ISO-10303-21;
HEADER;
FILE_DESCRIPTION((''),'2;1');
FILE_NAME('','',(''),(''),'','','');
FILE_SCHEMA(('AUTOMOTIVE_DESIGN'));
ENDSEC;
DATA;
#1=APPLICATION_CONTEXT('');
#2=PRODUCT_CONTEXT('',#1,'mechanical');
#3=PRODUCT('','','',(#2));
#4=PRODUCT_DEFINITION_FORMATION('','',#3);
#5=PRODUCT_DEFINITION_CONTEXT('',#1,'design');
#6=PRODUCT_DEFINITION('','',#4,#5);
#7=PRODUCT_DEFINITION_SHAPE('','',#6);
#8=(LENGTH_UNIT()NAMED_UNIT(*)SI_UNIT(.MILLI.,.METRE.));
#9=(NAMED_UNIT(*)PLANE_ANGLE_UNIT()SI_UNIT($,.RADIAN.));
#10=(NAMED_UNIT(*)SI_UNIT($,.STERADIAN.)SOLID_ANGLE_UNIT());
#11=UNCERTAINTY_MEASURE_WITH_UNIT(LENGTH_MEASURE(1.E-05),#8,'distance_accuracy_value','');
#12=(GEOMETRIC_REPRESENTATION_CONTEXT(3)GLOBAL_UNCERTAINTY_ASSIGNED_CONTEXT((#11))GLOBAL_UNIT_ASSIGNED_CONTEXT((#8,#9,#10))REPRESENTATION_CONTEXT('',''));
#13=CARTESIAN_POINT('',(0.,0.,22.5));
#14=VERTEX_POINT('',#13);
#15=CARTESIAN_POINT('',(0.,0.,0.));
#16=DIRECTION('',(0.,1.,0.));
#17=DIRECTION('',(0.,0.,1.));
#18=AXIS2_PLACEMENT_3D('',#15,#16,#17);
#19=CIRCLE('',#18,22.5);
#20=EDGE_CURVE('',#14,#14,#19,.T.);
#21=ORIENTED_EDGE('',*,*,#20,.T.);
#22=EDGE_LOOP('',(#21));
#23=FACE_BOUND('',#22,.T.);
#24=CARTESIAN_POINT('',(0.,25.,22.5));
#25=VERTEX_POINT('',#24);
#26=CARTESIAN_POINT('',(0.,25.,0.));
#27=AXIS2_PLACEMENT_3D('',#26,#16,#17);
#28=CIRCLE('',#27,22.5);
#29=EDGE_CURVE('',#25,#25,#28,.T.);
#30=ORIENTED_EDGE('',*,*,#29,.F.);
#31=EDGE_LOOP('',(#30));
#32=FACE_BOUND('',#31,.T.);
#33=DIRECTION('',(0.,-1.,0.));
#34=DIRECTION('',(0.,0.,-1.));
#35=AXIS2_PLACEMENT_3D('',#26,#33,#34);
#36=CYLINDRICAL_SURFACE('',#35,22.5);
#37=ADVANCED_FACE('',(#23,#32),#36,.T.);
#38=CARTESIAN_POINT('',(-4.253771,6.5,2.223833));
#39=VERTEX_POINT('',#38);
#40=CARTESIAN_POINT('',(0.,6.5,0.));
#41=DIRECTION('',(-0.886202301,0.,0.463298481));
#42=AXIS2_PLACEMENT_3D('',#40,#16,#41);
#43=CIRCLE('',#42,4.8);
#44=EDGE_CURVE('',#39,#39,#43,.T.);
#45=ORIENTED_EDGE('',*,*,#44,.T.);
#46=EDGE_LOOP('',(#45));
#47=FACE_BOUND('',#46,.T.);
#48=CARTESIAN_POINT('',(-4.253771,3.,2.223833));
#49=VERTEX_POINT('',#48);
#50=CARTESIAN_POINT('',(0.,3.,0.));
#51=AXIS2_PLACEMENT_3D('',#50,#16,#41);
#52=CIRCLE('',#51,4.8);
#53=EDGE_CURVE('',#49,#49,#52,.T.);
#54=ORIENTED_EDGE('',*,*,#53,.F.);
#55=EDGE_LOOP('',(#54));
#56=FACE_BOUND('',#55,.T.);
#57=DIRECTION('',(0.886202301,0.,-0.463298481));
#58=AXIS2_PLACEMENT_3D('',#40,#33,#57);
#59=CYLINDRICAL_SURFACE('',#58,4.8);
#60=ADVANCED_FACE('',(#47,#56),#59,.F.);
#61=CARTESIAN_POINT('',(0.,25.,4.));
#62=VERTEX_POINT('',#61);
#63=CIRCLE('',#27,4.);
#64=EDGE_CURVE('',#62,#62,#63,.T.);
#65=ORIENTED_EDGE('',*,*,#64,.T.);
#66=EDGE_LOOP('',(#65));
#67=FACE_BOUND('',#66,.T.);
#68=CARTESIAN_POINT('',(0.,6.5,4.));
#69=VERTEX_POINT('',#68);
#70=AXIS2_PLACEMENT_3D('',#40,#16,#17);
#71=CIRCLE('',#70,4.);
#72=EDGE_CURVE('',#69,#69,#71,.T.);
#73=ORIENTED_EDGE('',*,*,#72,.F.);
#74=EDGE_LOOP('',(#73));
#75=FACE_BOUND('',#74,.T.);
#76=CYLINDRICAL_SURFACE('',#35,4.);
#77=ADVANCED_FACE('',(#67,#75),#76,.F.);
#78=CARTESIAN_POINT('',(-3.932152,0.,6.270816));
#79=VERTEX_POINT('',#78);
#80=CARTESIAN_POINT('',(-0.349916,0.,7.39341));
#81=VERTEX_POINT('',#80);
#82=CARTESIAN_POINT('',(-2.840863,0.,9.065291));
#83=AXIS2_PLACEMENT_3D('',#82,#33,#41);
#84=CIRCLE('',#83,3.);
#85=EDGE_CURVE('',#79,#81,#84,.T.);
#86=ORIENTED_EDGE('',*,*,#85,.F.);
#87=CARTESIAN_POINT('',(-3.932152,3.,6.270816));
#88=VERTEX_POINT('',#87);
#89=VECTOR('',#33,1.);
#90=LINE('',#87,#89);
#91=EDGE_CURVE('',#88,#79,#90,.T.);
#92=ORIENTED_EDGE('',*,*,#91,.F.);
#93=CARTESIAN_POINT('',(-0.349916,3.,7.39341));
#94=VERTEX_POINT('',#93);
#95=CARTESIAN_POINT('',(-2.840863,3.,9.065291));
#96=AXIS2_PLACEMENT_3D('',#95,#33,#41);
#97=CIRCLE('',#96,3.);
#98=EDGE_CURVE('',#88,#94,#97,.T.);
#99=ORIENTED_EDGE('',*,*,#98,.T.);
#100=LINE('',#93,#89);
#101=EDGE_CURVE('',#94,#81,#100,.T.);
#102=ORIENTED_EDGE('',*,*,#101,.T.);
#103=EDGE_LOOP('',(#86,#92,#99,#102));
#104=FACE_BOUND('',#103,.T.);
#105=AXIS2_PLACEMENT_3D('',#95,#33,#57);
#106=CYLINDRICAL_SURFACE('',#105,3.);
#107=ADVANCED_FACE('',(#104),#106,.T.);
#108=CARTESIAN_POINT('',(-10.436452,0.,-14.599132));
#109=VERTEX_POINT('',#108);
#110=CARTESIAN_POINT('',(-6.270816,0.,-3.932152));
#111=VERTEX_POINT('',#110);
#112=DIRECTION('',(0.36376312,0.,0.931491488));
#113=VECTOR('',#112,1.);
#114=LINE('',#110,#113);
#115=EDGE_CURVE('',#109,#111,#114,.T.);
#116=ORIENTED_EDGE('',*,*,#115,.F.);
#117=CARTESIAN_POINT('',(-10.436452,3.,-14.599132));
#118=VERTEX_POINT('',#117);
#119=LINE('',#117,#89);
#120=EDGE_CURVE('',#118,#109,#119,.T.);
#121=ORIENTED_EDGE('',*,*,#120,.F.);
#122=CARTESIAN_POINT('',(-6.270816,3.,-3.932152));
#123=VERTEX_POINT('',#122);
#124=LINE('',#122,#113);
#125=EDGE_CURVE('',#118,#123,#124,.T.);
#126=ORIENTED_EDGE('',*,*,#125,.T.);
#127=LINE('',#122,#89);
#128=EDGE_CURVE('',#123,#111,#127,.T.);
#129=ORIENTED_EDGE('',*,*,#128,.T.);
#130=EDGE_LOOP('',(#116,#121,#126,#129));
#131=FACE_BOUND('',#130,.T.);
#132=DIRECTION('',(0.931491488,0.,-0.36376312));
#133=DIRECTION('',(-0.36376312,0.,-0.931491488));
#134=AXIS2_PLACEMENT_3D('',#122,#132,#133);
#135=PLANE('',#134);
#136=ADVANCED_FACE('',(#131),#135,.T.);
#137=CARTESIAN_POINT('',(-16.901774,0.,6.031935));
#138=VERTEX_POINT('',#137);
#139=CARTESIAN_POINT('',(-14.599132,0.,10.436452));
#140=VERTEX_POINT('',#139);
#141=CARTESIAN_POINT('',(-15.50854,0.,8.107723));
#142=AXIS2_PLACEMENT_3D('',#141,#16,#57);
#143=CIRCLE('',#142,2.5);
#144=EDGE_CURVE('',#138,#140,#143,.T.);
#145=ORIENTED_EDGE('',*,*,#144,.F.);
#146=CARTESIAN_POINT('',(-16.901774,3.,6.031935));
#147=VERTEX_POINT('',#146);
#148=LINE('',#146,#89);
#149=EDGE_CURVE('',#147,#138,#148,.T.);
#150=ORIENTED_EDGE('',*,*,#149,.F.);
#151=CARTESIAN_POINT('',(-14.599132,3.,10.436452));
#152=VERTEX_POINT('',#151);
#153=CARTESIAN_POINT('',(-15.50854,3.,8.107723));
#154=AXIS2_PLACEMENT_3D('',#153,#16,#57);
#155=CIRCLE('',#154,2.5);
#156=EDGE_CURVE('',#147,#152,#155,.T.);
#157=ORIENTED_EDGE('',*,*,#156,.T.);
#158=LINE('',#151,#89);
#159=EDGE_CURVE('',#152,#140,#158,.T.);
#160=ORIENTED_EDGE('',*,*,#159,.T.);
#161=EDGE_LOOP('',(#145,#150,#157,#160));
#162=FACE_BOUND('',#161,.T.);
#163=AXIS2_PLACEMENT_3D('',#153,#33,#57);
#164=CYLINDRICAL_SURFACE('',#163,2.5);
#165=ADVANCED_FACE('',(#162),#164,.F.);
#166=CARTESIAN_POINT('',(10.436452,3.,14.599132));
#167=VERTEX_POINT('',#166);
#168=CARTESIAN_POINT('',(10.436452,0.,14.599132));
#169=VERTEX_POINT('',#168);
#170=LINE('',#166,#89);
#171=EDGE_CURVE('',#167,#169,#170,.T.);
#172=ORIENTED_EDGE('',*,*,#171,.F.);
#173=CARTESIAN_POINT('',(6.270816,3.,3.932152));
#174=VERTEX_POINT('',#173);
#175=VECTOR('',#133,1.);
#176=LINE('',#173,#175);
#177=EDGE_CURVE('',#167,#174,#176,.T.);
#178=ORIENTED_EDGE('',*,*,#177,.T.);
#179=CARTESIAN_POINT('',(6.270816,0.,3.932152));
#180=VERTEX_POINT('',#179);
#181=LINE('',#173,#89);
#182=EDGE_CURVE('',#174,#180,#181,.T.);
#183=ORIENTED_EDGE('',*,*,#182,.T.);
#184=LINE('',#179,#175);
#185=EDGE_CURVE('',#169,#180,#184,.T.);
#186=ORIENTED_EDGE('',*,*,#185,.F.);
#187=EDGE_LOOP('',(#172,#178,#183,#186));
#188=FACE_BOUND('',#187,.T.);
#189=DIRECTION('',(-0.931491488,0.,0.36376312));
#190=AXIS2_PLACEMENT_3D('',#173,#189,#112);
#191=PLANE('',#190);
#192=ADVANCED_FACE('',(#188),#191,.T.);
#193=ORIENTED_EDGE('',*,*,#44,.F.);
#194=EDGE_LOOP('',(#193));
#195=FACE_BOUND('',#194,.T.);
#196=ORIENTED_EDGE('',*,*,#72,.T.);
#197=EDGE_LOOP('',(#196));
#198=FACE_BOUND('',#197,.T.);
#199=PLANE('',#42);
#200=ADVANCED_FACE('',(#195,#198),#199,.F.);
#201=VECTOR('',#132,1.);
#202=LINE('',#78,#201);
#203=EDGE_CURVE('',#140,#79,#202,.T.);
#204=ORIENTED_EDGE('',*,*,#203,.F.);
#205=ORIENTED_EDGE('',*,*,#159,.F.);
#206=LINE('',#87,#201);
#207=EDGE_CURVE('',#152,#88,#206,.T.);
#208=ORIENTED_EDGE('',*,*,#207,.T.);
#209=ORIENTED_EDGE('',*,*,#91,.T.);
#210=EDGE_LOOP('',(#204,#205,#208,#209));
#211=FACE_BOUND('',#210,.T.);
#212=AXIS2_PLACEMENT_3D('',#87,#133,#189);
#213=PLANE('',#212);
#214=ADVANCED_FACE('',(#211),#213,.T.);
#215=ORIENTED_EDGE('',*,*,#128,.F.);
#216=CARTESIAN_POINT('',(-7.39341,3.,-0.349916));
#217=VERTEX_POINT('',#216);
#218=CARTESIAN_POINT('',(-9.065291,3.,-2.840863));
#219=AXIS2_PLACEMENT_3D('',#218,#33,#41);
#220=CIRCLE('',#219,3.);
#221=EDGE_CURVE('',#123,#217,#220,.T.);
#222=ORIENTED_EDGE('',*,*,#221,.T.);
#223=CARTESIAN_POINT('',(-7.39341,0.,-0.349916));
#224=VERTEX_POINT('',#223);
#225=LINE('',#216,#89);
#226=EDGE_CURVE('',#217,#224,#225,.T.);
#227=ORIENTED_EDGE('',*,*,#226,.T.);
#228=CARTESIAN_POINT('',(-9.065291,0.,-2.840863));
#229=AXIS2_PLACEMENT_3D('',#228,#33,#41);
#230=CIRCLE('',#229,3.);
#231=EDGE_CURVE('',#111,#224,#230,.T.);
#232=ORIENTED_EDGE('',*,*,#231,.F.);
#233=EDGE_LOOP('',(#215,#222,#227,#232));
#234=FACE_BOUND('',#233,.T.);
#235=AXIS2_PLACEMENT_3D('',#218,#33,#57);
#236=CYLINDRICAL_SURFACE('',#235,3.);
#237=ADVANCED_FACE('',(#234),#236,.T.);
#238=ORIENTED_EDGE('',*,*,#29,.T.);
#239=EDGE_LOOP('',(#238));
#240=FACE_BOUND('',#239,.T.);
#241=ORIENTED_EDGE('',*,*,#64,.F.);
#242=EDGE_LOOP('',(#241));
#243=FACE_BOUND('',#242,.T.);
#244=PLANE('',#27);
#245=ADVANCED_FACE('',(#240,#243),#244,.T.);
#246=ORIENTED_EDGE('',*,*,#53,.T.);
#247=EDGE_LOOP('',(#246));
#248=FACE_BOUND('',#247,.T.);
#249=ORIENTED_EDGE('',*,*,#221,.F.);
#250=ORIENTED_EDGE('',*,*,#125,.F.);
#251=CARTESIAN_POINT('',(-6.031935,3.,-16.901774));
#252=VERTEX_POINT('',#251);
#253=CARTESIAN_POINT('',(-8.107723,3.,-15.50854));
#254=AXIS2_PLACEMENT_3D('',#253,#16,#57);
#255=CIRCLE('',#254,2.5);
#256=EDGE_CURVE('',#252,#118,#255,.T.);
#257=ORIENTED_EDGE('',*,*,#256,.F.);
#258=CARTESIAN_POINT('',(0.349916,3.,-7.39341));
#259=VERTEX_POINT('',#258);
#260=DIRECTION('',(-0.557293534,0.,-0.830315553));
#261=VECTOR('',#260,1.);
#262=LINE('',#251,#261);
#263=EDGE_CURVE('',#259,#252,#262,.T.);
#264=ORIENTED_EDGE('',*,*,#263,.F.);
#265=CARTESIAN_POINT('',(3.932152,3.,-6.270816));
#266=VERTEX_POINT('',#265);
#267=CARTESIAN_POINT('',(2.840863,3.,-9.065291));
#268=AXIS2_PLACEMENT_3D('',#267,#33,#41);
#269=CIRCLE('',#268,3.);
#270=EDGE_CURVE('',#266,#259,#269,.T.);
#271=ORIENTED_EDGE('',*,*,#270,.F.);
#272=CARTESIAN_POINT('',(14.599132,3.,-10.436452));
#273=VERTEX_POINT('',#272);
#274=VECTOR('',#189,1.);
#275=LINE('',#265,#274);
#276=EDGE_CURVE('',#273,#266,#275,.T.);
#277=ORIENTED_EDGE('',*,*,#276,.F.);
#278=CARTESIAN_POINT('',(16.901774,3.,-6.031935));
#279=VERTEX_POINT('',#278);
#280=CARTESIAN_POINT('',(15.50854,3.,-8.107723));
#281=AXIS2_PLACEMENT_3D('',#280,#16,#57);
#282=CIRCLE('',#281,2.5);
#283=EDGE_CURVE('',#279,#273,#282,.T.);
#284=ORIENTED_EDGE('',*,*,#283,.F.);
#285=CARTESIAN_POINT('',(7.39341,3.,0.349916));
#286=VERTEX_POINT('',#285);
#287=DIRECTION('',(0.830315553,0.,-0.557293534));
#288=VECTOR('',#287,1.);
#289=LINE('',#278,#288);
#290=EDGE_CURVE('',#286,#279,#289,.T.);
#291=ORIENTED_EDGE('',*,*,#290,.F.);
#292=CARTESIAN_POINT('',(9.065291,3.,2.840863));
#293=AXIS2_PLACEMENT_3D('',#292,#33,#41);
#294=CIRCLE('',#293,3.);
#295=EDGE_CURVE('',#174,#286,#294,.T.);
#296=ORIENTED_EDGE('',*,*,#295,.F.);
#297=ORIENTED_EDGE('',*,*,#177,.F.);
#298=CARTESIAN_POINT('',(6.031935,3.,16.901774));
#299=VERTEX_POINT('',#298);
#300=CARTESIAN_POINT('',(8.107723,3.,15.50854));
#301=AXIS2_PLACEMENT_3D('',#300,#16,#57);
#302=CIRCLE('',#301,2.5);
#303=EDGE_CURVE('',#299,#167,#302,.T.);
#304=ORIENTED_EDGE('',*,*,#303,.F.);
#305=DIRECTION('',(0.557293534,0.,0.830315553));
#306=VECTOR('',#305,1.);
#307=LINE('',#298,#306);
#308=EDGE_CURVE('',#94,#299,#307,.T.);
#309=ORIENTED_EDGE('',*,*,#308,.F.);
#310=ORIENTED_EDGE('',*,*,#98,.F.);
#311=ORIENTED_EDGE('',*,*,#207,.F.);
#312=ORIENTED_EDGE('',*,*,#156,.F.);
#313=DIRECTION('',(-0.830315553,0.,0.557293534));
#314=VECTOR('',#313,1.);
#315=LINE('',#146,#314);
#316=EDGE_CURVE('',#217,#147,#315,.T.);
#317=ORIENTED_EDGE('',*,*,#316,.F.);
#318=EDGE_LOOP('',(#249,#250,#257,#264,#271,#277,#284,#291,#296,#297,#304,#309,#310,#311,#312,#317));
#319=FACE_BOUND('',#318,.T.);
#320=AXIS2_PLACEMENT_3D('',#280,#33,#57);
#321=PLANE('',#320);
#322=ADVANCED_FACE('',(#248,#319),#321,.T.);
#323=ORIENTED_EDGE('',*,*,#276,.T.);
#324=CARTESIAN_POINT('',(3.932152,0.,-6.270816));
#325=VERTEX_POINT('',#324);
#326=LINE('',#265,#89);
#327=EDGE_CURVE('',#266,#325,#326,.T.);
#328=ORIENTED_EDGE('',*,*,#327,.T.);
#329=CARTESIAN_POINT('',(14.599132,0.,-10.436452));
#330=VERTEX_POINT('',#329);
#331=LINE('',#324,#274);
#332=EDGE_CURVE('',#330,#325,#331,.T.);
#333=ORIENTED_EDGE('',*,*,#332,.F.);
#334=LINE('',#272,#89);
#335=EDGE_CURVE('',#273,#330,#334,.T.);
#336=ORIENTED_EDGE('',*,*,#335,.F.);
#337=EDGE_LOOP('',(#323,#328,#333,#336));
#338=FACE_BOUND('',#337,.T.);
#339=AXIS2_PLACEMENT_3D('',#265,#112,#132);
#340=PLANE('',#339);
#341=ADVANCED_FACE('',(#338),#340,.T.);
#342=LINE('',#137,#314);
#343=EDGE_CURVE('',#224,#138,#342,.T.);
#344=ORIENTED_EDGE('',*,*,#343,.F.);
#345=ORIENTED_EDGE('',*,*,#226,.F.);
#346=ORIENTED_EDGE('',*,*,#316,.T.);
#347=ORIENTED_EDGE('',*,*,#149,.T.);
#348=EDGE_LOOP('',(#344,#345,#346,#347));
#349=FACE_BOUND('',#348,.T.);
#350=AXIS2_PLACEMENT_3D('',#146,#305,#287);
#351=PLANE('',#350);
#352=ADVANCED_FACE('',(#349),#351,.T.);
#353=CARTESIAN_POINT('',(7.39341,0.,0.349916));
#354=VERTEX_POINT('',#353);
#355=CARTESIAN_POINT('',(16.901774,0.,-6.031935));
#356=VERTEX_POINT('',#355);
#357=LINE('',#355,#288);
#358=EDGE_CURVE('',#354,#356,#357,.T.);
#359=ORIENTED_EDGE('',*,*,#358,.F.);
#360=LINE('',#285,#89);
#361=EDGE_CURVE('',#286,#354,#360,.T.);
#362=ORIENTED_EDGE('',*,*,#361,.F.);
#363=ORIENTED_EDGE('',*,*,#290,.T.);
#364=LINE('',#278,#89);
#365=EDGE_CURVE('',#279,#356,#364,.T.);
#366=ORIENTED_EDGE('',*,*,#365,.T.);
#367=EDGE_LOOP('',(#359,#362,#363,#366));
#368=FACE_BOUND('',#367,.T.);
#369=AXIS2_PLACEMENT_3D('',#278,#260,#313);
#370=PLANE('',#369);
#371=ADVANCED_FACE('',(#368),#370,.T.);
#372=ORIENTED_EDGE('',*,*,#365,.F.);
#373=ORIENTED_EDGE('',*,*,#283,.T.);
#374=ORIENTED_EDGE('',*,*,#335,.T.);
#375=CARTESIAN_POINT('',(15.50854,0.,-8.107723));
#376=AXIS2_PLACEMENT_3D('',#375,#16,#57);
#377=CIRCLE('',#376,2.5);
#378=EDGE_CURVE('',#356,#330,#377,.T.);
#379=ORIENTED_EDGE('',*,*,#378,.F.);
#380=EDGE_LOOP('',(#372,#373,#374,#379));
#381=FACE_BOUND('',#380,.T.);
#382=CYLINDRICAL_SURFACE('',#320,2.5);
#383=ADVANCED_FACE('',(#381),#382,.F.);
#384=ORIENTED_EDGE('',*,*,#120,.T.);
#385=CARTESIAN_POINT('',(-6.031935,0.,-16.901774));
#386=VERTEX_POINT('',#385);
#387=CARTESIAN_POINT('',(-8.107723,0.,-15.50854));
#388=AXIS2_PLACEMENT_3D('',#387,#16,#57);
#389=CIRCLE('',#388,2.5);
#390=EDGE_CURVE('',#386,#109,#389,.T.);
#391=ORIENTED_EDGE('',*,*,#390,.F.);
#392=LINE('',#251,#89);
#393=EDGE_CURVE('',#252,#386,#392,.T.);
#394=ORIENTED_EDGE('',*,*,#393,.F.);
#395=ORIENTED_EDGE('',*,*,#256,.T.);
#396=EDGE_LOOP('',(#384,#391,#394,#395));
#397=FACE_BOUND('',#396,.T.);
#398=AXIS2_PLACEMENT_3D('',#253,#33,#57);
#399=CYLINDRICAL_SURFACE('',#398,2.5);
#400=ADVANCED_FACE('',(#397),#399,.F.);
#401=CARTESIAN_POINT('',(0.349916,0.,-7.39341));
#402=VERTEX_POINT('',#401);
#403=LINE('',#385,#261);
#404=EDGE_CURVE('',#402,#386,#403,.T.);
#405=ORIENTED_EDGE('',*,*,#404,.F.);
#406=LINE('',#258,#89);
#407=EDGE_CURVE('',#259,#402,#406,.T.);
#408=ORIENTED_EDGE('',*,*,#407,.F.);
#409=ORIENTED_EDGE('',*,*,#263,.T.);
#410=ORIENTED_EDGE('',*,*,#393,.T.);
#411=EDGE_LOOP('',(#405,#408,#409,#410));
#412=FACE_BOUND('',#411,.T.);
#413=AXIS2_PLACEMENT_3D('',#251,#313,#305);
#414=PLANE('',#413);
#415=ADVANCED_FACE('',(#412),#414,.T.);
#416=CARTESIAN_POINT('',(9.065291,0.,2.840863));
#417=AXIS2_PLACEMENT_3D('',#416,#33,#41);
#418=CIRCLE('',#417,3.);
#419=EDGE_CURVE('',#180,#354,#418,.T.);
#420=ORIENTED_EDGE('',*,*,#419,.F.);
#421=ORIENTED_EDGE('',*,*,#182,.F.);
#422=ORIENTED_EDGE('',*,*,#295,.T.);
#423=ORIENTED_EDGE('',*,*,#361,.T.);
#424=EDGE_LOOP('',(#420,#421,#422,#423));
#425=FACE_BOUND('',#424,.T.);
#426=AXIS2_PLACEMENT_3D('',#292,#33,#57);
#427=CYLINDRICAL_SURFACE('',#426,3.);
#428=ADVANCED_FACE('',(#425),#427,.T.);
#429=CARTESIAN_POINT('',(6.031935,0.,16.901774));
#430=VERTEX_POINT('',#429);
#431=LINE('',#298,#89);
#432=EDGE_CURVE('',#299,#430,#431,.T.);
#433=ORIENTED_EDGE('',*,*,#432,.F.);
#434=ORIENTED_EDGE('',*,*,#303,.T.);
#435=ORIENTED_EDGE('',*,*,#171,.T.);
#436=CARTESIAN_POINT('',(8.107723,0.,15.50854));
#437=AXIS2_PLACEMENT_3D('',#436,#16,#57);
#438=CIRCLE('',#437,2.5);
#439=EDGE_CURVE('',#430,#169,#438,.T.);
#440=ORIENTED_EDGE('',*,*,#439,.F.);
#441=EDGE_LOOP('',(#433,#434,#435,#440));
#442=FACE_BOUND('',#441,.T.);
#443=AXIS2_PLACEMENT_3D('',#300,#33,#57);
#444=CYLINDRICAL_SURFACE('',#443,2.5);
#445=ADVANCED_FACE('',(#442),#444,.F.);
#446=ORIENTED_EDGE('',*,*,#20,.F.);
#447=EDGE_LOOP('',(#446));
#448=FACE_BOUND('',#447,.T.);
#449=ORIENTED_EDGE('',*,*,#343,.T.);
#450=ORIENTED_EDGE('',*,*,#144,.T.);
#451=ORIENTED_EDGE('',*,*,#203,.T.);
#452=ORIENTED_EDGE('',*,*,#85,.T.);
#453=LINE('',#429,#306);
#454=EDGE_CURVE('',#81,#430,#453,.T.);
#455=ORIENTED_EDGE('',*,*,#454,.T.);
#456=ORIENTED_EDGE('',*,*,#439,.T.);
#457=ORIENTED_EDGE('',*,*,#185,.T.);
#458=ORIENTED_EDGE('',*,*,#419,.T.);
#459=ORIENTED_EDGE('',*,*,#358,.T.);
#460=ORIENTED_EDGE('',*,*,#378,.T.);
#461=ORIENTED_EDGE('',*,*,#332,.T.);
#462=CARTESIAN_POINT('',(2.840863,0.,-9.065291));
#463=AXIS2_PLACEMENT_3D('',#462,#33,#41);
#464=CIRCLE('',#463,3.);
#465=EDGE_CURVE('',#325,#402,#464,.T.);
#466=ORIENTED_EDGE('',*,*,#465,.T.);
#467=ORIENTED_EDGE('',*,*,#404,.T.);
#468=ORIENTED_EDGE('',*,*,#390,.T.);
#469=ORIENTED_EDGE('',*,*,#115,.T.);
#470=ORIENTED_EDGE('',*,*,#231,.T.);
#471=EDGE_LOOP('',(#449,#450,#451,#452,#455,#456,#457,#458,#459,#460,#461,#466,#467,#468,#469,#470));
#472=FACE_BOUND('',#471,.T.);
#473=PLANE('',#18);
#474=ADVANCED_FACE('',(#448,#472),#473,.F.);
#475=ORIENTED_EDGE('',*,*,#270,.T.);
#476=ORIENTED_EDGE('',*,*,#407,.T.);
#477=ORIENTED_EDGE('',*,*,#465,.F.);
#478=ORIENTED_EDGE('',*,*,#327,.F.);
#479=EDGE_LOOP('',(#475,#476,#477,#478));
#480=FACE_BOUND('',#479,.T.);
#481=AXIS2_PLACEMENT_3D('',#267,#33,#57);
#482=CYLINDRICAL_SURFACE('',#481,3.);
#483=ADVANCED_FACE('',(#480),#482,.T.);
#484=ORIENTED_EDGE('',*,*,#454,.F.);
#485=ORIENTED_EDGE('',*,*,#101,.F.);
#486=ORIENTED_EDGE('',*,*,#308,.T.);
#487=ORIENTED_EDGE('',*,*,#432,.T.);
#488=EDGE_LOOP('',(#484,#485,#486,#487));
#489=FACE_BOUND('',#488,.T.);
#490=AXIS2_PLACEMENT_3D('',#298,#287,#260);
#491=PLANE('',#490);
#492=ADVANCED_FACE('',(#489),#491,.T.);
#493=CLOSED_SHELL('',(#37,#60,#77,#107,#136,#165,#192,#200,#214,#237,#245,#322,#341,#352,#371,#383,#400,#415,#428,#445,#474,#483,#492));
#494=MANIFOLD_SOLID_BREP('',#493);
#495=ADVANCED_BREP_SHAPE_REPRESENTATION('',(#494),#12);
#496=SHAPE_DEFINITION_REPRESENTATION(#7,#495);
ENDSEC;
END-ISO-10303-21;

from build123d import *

# Parameters (mm, degrees)
ESQUISSE1_R              = 22.5
ESQUISSE1_R_2            = 4
BOSS_EXTRU_1_DEPTH       = 25
EMPREINTE2_OUTLINE_R     = 4
EMPREINTE2_DEPTH         = 3
EMPREINTE2_START         = 3
EMPREINTE2_2_OUTLINE_R   = 4.8
EMPREINTE2_2_OUTLINE_R_2 = 4
EMPREINTE2_2_DEPTH       = 3.5


# Read off the part's stored shape, not the designer's step: Empreinte2
with BuildPart() as part:
    # Esquisse1 → Boss.-Extru.1 (new body)
    with BuildSketch(Plane(origin=(0, 0, 0), x_dir=(1, 0, 0), z_dir=(0, 1, 0))):
        with Locations(Location((0, 0, 0), (0, 0, 270))):
            Circle(ESQUISSE1_R)
        with Locations(Location((0, 0, 0), (0, 0, 270))):
            Circle(ESQUISSE1_R_2, mode=Mode.SUBTRACT)
    extrude(amount=BOSS_EXTRU_1_DEPTH)

    # Empreinte2 outline → Empreinte2 (cut)
    with BuildSketch(Plane(origin=(0, 0, 0), x_dir=(1, 0, 0), z_dir=(0, 1, 0))):
        with BuildLine():
            ThreePointArc((16.901774097, 6.031934529), (17.724046015, 9.265969613), (14.599132464, 10.436452132))
            Line((14.599132464, 10.436452132), (3.932151869, 6.270816496))
            ThreePointArc((3.932151869, 6.270816496), (1.943748033, 6.202567499), (0.349915852, 7.393410359))
            Line((0.349915852, 7.393410359), (-6.031934529, 16.901774097))
            ThreePointArc((-6.031934529, 16.901774097), (-9.265969613, 17.724046015), (-10.436452132, 14.599132464))
            Line((-10.436452132, 14.599132464), (-6.270816496, 3.932151869))
            ThreePointArc((-6.270816496, 3.932151869), (-6.202567499, 1.943748033), (-7.393410359, 0.349915852))
            Line((-7.393410359, 0.349915852), (-16.901774097, -6.031934529))
            ThreePointArc((-16.901774097, -6.031934529), (-17.724046015, -9.265969613), (-14.599132464, -10.436452132))
            Line((-14.599132464, -10.436452132), (-3.932151869, -6.270816496))
            ThreePointArc((-3.932151869, -6.270816496), (-1.943748033, -6.202567499), (-0.349915852, -7.393410359))
            Line((-0.349915852, -7.393410359), (6.031934529, -16.901774097))
            ThreePointArc((6.031934529, -16.901774097), (9.265969613, -17.724046015), (10.436452132, -14.599132464))
            Line((10.436452132, -14.599132464), (6.270816496, -3.932151869))
            ThreePointArc((6.270816496, -3.932151869), (6.202567499, -1.943748033), (7.393410359, -0.349915852))
            Line((7.393410359, -0.349915852), (16.901774097, 6.031934529))
        make_face()
        Circle(EMPREINTE2_OUTLINE_R, mode=Mode.SUBTRACT)
    extrude(amount=EMPREINTE2_DEPTH, mode=Mode.SUBTRACT)

    # Empreinte2 2 outline → Empreinte2 2 (cut)
    with BuildSketch(Plane(origin=(0, 0, 0), x_dir=(1, 0, 0), z_dir=(0, 1, 0)).offset(EMPREINTE2_START)):
        Circle(EMPREINTE2_2_OUTLINE_R)
        Circle(EMPREINTE2_2_OUTLINE_R_2, mode=Mode.SUBTRACT)
    extrude(amount=EMPREINTE2_2_DEPTH, mode=Mode.SUBTRACT)


solid = part.part
